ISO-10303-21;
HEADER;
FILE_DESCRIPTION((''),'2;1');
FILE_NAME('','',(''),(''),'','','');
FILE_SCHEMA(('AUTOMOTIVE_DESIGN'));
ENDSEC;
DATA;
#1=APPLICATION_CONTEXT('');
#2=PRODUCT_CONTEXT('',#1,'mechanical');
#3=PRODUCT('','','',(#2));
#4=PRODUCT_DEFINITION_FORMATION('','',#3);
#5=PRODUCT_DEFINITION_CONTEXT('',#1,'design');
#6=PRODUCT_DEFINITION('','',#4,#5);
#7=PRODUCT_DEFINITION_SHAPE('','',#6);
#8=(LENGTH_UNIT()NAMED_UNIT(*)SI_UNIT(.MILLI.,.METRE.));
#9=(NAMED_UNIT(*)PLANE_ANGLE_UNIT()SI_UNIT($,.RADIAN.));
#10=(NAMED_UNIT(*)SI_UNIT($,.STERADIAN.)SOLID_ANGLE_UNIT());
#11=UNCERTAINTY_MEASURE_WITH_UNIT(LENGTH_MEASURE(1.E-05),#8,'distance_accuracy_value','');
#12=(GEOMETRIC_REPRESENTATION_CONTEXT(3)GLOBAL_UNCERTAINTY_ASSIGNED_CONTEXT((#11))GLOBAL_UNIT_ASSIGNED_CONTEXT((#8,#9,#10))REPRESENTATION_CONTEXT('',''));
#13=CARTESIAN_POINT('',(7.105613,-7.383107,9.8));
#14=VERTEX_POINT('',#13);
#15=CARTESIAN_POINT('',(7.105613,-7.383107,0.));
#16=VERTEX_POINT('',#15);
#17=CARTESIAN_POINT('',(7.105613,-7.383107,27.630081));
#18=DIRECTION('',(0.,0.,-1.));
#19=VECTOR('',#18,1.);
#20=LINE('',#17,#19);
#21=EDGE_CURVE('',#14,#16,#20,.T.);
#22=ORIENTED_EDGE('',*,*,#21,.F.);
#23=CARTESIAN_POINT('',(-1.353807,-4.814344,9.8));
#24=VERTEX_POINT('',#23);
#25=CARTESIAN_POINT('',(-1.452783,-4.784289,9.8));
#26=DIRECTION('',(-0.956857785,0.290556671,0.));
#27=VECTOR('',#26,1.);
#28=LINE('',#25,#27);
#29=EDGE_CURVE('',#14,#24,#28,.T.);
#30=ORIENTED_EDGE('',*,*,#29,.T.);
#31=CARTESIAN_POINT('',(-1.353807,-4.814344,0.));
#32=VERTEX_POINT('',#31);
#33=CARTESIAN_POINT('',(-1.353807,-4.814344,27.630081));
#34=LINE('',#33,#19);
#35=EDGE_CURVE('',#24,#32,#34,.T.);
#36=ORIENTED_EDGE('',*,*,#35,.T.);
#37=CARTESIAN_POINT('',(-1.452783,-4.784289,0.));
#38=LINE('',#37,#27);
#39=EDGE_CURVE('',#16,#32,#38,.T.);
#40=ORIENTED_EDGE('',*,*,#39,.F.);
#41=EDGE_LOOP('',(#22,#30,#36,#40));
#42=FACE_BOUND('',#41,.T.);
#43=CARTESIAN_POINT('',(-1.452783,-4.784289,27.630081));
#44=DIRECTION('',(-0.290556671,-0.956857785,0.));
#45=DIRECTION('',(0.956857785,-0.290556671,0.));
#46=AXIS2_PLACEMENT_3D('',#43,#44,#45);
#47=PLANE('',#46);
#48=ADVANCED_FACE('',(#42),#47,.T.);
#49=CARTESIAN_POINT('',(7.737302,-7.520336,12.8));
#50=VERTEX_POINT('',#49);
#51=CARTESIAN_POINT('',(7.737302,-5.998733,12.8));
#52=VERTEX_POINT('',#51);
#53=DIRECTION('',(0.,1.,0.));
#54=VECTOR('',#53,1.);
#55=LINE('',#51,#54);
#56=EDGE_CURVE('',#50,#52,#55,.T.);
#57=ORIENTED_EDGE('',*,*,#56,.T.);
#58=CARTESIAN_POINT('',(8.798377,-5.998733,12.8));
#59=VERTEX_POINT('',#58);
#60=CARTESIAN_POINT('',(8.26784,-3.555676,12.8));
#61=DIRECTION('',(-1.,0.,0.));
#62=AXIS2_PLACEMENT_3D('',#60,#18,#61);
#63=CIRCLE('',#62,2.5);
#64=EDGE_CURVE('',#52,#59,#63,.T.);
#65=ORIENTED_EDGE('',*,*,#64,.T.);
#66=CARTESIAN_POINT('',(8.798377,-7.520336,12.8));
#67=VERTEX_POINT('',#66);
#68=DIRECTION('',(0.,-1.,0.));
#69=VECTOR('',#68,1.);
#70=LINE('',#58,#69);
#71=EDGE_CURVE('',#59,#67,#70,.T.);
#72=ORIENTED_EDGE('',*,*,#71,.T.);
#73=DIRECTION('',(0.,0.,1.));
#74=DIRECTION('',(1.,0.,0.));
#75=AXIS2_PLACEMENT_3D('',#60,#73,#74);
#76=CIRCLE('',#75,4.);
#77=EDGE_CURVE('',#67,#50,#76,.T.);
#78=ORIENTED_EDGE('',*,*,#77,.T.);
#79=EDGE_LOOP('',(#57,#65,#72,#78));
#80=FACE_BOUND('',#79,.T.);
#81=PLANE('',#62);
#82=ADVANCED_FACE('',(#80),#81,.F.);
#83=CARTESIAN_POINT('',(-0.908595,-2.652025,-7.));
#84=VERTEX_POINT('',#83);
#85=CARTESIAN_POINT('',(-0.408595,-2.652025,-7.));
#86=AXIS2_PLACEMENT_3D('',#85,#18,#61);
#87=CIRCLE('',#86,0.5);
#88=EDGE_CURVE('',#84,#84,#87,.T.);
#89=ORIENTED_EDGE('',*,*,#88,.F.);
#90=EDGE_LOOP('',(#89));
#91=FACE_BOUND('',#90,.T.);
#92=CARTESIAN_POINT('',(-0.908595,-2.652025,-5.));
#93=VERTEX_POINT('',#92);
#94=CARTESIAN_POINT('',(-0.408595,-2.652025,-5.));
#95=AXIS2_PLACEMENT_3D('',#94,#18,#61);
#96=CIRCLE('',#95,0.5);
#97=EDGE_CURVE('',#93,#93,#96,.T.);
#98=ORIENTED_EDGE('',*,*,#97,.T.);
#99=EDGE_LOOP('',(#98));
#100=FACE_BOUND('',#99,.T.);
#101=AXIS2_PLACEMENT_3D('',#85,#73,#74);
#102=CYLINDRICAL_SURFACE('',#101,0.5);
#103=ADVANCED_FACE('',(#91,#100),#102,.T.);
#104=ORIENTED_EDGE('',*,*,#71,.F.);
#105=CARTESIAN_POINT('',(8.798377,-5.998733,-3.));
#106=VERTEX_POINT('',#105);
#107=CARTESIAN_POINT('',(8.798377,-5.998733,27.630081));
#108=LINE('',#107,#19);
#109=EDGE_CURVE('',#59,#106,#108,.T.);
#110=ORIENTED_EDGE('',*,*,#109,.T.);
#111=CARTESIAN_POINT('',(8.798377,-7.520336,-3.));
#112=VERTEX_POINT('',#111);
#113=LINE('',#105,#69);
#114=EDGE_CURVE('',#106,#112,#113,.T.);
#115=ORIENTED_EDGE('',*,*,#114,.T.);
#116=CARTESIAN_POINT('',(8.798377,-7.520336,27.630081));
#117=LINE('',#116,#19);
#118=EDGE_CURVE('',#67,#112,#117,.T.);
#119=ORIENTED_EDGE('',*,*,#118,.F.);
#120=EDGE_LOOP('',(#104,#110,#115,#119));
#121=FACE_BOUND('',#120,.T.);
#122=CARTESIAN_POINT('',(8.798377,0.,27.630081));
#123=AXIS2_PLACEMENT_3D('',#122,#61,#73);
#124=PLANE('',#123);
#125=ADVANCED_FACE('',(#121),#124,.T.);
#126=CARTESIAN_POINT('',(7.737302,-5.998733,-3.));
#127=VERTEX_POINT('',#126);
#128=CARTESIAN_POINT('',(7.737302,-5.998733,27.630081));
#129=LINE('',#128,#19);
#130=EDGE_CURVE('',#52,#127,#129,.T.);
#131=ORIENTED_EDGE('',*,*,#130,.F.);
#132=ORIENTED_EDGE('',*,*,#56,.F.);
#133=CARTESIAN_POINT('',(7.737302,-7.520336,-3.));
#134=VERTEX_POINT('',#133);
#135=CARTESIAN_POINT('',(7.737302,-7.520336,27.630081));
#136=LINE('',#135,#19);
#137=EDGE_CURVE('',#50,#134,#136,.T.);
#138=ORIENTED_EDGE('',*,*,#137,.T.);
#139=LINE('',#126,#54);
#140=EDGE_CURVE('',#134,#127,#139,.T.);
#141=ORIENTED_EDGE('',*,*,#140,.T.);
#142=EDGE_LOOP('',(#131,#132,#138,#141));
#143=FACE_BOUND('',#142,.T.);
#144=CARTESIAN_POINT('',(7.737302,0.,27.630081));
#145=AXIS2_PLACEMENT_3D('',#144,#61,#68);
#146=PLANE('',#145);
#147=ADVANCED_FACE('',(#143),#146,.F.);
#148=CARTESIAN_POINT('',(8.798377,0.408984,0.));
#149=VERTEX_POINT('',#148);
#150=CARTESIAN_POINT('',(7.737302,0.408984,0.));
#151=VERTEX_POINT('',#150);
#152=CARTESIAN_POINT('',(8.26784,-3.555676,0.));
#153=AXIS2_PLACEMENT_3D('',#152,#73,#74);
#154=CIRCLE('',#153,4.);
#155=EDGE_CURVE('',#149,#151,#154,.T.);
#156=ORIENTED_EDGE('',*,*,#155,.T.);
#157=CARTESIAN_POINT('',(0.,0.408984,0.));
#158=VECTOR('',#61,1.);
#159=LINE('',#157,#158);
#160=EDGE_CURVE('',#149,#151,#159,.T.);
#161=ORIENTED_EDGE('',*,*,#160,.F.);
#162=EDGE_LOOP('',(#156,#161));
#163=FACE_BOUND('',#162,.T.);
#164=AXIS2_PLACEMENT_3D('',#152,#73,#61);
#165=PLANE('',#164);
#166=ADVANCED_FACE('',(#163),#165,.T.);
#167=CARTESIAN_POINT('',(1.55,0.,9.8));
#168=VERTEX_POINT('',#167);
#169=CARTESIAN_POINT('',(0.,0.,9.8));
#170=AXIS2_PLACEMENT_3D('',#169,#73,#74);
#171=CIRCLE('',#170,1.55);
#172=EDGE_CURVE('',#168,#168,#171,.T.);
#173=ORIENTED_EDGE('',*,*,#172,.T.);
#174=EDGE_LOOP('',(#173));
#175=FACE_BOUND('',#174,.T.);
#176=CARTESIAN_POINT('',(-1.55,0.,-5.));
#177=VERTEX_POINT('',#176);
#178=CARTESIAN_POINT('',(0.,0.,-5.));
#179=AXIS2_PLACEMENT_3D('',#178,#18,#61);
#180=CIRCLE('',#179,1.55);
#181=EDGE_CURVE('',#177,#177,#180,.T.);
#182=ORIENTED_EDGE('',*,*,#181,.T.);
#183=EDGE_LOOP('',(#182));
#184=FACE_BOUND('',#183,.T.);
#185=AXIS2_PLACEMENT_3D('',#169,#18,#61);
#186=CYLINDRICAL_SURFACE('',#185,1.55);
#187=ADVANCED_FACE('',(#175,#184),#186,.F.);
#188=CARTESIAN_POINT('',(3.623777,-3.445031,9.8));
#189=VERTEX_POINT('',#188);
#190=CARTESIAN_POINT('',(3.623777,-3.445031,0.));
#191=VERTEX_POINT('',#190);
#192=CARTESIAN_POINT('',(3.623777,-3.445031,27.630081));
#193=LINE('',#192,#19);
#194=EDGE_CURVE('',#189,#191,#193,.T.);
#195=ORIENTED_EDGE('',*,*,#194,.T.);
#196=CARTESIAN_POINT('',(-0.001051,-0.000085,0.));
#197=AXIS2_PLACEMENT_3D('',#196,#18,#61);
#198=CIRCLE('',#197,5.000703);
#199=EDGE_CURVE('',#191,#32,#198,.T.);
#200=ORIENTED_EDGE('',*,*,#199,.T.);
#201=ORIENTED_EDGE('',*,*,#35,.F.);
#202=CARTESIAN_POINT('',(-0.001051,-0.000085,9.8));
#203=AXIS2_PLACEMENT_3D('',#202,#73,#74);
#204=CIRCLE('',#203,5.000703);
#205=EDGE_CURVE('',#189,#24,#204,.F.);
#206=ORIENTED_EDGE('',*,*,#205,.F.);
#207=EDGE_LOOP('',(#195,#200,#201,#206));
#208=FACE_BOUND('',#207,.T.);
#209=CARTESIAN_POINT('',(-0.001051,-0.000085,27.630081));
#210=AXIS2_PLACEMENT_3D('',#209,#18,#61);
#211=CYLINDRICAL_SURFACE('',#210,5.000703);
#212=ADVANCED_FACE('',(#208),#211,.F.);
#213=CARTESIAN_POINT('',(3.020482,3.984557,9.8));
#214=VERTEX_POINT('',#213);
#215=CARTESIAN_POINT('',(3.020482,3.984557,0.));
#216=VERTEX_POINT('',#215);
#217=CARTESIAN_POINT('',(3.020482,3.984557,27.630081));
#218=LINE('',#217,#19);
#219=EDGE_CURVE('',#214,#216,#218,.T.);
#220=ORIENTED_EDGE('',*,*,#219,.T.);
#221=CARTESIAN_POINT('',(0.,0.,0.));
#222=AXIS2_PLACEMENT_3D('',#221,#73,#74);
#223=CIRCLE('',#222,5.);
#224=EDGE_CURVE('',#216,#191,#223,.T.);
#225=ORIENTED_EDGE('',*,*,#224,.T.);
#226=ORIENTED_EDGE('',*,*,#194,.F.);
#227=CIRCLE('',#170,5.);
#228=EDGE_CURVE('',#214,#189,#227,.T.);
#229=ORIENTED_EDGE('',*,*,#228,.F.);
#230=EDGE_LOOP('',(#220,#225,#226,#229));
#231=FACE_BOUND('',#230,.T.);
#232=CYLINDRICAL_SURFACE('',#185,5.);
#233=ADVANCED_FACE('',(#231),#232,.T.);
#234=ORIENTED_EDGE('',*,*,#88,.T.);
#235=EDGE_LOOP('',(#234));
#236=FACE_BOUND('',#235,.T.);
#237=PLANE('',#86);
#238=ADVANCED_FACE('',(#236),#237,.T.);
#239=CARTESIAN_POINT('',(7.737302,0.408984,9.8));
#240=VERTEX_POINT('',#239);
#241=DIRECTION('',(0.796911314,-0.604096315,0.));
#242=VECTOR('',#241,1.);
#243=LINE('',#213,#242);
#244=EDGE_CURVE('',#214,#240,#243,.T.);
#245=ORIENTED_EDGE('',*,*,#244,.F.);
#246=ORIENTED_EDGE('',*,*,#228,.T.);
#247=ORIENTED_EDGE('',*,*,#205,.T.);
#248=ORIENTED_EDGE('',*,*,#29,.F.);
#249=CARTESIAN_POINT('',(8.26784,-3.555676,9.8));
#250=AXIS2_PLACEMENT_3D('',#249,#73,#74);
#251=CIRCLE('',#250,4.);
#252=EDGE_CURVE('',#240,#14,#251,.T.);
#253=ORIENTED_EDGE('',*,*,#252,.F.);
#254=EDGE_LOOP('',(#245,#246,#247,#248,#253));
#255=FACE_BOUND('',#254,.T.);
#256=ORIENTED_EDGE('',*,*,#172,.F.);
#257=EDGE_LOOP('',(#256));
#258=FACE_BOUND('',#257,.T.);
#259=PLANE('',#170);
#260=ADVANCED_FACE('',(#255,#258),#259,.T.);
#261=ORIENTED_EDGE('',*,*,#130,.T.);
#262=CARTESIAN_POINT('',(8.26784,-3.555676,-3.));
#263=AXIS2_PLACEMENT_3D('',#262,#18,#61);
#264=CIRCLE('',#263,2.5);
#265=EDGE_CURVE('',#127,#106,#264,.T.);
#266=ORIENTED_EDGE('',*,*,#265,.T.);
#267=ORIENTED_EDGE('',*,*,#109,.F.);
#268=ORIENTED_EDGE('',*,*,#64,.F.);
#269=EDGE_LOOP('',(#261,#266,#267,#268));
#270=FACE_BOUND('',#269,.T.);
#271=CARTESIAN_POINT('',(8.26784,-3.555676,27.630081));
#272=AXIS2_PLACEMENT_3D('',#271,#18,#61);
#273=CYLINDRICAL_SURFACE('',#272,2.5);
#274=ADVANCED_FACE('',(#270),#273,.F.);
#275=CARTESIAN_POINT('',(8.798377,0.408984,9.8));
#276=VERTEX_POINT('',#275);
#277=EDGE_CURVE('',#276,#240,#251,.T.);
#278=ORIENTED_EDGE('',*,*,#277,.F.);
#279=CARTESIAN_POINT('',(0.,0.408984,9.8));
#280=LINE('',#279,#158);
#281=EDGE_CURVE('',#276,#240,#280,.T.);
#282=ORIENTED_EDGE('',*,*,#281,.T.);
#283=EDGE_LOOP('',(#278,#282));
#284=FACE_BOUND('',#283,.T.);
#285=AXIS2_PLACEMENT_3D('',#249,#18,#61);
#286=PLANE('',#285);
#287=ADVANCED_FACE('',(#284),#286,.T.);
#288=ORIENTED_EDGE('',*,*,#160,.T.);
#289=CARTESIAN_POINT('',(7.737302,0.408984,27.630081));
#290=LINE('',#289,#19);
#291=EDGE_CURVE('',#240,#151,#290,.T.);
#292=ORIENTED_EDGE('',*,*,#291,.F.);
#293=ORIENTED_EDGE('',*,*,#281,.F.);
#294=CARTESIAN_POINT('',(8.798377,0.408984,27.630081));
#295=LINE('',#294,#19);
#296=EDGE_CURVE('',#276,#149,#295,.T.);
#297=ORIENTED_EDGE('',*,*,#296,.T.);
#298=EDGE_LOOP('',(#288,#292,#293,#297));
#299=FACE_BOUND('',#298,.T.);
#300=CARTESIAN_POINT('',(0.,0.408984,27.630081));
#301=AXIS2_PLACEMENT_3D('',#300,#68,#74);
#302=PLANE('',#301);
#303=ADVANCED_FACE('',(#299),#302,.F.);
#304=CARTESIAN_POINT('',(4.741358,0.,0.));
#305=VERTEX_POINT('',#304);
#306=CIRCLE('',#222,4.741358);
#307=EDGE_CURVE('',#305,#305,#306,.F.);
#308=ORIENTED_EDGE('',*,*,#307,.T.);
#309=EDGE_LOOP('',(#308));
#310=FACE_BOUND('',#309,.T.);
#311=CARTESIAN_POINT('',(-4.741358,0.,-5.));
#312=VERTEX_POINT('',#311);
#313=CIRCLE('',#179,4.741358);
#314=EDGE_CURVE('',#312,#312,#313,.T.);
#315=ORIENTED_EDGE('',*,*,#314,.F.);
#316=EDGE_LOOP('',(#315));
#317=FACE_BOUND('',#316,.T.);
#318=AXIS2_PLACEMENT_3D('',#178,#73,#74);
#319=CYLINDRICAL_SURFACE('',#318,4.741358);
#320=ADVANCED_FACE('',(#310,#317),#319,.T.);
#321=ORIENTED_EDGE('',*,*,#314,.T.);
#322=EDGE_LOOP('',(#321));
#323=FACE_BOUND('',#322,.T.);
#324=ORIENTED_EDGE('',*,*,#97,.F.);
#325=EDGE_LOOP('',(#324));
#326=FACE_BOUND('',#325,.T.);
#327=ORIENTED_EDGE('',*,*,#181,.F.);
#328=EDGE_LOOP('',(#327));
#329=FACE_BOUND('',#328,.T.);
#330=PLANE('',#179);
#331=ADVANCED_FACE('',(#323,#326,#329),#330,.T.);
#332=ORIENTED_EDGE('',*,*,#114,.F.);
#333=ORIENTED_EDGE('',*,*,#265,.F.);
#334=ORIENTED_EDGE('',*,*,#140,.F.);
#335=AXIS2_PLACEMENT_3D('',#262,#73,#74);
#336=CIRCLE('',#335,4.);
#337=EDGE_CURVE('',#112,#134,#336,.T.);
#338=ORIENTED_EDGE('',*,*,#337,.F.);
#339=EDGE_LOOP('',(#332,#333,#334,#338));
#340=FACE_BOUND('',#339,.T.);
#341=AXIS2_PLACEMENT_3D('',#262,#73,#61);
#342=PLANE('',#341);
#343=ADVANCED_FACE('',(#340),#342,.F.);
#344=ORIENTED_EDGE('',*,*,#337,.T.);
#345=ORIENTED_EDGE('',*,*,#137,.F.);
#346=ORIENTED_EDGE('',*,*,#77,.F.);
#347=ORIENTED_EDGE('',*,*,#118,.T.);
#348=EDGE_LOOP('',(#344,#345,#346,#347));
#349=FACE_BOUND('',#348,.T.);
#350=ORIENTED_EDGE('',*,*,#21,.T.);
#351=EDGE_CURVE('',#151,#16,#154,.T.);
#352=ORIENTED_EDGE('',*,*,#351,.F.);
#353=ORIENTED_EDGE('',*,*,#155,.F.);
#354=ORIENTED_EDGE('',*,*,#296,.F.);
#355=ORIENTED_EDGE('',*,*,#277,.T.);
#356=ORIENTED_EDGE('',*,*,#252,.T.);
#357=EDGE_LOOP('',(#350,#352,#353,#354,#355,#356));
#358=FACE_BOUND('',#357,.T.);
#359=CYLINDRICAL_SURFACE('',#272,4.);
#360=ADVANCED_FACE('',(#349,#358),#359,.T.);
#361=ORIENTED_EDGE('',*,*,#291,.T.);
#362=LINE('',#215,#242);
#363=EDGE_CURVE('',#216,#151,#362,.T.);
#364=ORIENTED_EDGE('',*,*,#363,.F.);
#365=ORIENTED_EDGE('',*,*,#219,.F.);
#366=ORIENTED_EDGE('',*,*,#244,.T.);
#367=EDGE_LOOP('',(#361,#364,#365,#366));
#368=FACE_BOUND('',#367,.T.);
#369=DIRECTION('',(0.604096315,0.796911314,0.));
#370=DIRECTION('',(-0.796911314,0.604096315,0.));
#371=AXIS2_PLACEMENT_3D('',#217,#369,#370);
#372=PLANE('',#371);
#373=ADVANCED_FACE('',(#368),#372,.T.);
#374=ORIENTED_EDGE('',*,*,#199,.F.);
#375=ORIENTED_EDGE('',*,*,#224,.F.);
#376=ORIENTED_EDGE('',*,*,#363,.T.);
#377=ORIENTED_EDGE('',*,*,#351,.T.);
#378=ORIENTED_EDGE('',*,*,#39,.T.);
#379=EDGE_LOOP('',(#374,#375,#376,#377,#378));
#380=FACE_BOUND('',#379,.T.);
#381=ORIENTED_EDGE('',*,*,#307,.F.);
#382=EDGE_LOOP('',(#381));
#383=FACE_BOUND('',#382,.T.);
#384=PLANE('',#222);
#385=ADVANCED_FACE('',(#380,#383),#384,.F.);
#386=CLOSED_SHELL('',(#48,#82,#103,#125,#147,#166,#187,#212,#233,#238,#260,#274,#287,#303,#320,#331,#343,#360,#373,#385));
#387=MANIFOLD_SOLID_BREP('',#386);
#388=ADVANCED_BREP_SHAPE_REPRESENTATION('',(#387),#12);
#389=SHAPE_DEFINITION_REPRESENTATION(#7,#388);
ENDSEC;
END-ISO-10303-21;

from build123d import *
from build123d.topology import SkipClean

# Parameters (mm, degrees)
ESQUISSE1_R         = 5
ESQUISSE1_R_2       = 1.55
BOSS_EXTRU_1_DEPTH  = 9.8
BOSS_EXTRUDE3_START = -9.8
BOSS_EXTRUDE3_DEPTH = 9.8
BOSS_EXTRUDE4_START = 3
BOSS_EXTRUDE4_DEPTH = 3
BOSS_EXTRUDE5_START = 5
SKETCH6_R           = 4.741358269
SKETCH6_R_2         = 1.55
BOSS_EXTRUDE5_DEPTH = 5
SKETCH7_R           = 0.5
BOSS_EXTRUDE6_DEPTH = 2


# Read off the part's stored shape, not the designer's step: Boss-Extrude3
with BuildPart() as part:
    # Esquisse1 → Boss.-Extru.1 (new body)
    with BuildSketch(Plane.XY):
        Circle(ESQUISSE1_R)
        Circle(ESQUISSE1_R_2, mode=Mode.SUBTRACT)
    extrude(amount=BOSS_EXTRU_1_DEPTH)

    # Boss-Extrude3 outline → Boss-Extrude3 (add)
    with BuildSketch(Plane(origin=(0, 0, 0), x_dir=(-1, 0, 0), z_dir=(0, 0, -1)).offset(BOSS_EXTRUDE3_START)):
        with BuildLine():
            Line((-7.73730203, -5.998733154), (-7.73730203, -7.520335784))
            ThreePointArc((-7.73730203, -7.520335784), (-7.418680778, -7.464502766), (-7.105612856, -7.383106794))
            Line((-7.105612856, -7.383106794), (1.353806639, -4.814343909))
            ThreePointArc((1.353806639, -4.814343909), (-1.32534738, -4.821672129), (-3.623777148, -3.445031085))
            ThreePointArc((-3.623777148, -3.445031085), (-4.983596761, 0.404676815), (-3.020481574, 3.98455657))
            Line((-3.020481574, 3.98455657), (-7.73730203, 0.408984477))
            Line((-7.73730203, 0.408984477), (-8.798377048, 0.408984477))
            ThreePointArc((-8.798377048, 0.408984477), (-12.267839539, -3.555675653), (-8.798377048, -7.520335784))
            Line((-8.798377048, -7.520335784), (-8.798377048, -5.998733154))
            ThreePointArc((-8.798377048, -5.998733154), (-8.267839539, -1.055675653), (-7.73730203, -5.998733154))
        make_face()
    extrude(amount=BOSS_EXTRUDE3_DEPTH)

    # Sketch5 → Boss-Extrude4 (add)
    with BuildSketch(Plane.XY.offset(9.8).offset(BOSS_EXTRUDE4_START)):
        with BuildLine():
            Line((7.73730203, -5.998733154), (7.73730203, -7.520335784))
            ThreePointArc((7.73730203, -7.520335784), (8.267839539, 0.444324347), (8.798377048, -7.520335784))
            Line((8.798377048, -7.520335784), (8.798377048, -5.998733154))
            ThreePointArc((8.798377048, -5.998733154), (8.267839539, -1.055675653), (7.73730203, -5.998733154))
        make_face()
    boss_extrude4 = extrude(amount=-BOSS_EXTRUDE4_DEPTH)

    # Mirror1: Boss-Extrude4 across plane
    add(boss_extrude4.mirror(Plane.XY.offset(4.9)))

    # Sketch6 → Boss-Extrude5 (add)
    with SkipClean():  # the faces are left unmerged after this step: merging them gives an invalid solid
        with BuildSketch(Plane(origin=(0, 0, 0), x_dir=(-1, 0, 0), z_dir=(0, 0, -1)).offset(BOSS_EXTRUDE5_START)):
            with Locations(Location((0, 0, 0), (0, 0, 180))):
                Circle(SKETCH6_R)
            Circle(SKETCH6_R_2, mode=Mode.SUBTRACT)
        extrude(amount=-BOSS_EXTRUDE5_DEPTH)

    # Sketch7 → Boss-Extrude6 (add)
    with SkipClean():  # the faces are left unmerged after this step: merging them gives an invalid solid
        with BuildSketch(Plane(origin=(0, 0, -5), x_dir=(-1, 0, 0), z_dir=(0, 0, -1))):
            with Locations((0.408594664, -2.652025432)):
                Circle(SKETCH7_R)
        extrude(amount=BOSS_EXTRUDE6_DEPTH)


solid = part.part
